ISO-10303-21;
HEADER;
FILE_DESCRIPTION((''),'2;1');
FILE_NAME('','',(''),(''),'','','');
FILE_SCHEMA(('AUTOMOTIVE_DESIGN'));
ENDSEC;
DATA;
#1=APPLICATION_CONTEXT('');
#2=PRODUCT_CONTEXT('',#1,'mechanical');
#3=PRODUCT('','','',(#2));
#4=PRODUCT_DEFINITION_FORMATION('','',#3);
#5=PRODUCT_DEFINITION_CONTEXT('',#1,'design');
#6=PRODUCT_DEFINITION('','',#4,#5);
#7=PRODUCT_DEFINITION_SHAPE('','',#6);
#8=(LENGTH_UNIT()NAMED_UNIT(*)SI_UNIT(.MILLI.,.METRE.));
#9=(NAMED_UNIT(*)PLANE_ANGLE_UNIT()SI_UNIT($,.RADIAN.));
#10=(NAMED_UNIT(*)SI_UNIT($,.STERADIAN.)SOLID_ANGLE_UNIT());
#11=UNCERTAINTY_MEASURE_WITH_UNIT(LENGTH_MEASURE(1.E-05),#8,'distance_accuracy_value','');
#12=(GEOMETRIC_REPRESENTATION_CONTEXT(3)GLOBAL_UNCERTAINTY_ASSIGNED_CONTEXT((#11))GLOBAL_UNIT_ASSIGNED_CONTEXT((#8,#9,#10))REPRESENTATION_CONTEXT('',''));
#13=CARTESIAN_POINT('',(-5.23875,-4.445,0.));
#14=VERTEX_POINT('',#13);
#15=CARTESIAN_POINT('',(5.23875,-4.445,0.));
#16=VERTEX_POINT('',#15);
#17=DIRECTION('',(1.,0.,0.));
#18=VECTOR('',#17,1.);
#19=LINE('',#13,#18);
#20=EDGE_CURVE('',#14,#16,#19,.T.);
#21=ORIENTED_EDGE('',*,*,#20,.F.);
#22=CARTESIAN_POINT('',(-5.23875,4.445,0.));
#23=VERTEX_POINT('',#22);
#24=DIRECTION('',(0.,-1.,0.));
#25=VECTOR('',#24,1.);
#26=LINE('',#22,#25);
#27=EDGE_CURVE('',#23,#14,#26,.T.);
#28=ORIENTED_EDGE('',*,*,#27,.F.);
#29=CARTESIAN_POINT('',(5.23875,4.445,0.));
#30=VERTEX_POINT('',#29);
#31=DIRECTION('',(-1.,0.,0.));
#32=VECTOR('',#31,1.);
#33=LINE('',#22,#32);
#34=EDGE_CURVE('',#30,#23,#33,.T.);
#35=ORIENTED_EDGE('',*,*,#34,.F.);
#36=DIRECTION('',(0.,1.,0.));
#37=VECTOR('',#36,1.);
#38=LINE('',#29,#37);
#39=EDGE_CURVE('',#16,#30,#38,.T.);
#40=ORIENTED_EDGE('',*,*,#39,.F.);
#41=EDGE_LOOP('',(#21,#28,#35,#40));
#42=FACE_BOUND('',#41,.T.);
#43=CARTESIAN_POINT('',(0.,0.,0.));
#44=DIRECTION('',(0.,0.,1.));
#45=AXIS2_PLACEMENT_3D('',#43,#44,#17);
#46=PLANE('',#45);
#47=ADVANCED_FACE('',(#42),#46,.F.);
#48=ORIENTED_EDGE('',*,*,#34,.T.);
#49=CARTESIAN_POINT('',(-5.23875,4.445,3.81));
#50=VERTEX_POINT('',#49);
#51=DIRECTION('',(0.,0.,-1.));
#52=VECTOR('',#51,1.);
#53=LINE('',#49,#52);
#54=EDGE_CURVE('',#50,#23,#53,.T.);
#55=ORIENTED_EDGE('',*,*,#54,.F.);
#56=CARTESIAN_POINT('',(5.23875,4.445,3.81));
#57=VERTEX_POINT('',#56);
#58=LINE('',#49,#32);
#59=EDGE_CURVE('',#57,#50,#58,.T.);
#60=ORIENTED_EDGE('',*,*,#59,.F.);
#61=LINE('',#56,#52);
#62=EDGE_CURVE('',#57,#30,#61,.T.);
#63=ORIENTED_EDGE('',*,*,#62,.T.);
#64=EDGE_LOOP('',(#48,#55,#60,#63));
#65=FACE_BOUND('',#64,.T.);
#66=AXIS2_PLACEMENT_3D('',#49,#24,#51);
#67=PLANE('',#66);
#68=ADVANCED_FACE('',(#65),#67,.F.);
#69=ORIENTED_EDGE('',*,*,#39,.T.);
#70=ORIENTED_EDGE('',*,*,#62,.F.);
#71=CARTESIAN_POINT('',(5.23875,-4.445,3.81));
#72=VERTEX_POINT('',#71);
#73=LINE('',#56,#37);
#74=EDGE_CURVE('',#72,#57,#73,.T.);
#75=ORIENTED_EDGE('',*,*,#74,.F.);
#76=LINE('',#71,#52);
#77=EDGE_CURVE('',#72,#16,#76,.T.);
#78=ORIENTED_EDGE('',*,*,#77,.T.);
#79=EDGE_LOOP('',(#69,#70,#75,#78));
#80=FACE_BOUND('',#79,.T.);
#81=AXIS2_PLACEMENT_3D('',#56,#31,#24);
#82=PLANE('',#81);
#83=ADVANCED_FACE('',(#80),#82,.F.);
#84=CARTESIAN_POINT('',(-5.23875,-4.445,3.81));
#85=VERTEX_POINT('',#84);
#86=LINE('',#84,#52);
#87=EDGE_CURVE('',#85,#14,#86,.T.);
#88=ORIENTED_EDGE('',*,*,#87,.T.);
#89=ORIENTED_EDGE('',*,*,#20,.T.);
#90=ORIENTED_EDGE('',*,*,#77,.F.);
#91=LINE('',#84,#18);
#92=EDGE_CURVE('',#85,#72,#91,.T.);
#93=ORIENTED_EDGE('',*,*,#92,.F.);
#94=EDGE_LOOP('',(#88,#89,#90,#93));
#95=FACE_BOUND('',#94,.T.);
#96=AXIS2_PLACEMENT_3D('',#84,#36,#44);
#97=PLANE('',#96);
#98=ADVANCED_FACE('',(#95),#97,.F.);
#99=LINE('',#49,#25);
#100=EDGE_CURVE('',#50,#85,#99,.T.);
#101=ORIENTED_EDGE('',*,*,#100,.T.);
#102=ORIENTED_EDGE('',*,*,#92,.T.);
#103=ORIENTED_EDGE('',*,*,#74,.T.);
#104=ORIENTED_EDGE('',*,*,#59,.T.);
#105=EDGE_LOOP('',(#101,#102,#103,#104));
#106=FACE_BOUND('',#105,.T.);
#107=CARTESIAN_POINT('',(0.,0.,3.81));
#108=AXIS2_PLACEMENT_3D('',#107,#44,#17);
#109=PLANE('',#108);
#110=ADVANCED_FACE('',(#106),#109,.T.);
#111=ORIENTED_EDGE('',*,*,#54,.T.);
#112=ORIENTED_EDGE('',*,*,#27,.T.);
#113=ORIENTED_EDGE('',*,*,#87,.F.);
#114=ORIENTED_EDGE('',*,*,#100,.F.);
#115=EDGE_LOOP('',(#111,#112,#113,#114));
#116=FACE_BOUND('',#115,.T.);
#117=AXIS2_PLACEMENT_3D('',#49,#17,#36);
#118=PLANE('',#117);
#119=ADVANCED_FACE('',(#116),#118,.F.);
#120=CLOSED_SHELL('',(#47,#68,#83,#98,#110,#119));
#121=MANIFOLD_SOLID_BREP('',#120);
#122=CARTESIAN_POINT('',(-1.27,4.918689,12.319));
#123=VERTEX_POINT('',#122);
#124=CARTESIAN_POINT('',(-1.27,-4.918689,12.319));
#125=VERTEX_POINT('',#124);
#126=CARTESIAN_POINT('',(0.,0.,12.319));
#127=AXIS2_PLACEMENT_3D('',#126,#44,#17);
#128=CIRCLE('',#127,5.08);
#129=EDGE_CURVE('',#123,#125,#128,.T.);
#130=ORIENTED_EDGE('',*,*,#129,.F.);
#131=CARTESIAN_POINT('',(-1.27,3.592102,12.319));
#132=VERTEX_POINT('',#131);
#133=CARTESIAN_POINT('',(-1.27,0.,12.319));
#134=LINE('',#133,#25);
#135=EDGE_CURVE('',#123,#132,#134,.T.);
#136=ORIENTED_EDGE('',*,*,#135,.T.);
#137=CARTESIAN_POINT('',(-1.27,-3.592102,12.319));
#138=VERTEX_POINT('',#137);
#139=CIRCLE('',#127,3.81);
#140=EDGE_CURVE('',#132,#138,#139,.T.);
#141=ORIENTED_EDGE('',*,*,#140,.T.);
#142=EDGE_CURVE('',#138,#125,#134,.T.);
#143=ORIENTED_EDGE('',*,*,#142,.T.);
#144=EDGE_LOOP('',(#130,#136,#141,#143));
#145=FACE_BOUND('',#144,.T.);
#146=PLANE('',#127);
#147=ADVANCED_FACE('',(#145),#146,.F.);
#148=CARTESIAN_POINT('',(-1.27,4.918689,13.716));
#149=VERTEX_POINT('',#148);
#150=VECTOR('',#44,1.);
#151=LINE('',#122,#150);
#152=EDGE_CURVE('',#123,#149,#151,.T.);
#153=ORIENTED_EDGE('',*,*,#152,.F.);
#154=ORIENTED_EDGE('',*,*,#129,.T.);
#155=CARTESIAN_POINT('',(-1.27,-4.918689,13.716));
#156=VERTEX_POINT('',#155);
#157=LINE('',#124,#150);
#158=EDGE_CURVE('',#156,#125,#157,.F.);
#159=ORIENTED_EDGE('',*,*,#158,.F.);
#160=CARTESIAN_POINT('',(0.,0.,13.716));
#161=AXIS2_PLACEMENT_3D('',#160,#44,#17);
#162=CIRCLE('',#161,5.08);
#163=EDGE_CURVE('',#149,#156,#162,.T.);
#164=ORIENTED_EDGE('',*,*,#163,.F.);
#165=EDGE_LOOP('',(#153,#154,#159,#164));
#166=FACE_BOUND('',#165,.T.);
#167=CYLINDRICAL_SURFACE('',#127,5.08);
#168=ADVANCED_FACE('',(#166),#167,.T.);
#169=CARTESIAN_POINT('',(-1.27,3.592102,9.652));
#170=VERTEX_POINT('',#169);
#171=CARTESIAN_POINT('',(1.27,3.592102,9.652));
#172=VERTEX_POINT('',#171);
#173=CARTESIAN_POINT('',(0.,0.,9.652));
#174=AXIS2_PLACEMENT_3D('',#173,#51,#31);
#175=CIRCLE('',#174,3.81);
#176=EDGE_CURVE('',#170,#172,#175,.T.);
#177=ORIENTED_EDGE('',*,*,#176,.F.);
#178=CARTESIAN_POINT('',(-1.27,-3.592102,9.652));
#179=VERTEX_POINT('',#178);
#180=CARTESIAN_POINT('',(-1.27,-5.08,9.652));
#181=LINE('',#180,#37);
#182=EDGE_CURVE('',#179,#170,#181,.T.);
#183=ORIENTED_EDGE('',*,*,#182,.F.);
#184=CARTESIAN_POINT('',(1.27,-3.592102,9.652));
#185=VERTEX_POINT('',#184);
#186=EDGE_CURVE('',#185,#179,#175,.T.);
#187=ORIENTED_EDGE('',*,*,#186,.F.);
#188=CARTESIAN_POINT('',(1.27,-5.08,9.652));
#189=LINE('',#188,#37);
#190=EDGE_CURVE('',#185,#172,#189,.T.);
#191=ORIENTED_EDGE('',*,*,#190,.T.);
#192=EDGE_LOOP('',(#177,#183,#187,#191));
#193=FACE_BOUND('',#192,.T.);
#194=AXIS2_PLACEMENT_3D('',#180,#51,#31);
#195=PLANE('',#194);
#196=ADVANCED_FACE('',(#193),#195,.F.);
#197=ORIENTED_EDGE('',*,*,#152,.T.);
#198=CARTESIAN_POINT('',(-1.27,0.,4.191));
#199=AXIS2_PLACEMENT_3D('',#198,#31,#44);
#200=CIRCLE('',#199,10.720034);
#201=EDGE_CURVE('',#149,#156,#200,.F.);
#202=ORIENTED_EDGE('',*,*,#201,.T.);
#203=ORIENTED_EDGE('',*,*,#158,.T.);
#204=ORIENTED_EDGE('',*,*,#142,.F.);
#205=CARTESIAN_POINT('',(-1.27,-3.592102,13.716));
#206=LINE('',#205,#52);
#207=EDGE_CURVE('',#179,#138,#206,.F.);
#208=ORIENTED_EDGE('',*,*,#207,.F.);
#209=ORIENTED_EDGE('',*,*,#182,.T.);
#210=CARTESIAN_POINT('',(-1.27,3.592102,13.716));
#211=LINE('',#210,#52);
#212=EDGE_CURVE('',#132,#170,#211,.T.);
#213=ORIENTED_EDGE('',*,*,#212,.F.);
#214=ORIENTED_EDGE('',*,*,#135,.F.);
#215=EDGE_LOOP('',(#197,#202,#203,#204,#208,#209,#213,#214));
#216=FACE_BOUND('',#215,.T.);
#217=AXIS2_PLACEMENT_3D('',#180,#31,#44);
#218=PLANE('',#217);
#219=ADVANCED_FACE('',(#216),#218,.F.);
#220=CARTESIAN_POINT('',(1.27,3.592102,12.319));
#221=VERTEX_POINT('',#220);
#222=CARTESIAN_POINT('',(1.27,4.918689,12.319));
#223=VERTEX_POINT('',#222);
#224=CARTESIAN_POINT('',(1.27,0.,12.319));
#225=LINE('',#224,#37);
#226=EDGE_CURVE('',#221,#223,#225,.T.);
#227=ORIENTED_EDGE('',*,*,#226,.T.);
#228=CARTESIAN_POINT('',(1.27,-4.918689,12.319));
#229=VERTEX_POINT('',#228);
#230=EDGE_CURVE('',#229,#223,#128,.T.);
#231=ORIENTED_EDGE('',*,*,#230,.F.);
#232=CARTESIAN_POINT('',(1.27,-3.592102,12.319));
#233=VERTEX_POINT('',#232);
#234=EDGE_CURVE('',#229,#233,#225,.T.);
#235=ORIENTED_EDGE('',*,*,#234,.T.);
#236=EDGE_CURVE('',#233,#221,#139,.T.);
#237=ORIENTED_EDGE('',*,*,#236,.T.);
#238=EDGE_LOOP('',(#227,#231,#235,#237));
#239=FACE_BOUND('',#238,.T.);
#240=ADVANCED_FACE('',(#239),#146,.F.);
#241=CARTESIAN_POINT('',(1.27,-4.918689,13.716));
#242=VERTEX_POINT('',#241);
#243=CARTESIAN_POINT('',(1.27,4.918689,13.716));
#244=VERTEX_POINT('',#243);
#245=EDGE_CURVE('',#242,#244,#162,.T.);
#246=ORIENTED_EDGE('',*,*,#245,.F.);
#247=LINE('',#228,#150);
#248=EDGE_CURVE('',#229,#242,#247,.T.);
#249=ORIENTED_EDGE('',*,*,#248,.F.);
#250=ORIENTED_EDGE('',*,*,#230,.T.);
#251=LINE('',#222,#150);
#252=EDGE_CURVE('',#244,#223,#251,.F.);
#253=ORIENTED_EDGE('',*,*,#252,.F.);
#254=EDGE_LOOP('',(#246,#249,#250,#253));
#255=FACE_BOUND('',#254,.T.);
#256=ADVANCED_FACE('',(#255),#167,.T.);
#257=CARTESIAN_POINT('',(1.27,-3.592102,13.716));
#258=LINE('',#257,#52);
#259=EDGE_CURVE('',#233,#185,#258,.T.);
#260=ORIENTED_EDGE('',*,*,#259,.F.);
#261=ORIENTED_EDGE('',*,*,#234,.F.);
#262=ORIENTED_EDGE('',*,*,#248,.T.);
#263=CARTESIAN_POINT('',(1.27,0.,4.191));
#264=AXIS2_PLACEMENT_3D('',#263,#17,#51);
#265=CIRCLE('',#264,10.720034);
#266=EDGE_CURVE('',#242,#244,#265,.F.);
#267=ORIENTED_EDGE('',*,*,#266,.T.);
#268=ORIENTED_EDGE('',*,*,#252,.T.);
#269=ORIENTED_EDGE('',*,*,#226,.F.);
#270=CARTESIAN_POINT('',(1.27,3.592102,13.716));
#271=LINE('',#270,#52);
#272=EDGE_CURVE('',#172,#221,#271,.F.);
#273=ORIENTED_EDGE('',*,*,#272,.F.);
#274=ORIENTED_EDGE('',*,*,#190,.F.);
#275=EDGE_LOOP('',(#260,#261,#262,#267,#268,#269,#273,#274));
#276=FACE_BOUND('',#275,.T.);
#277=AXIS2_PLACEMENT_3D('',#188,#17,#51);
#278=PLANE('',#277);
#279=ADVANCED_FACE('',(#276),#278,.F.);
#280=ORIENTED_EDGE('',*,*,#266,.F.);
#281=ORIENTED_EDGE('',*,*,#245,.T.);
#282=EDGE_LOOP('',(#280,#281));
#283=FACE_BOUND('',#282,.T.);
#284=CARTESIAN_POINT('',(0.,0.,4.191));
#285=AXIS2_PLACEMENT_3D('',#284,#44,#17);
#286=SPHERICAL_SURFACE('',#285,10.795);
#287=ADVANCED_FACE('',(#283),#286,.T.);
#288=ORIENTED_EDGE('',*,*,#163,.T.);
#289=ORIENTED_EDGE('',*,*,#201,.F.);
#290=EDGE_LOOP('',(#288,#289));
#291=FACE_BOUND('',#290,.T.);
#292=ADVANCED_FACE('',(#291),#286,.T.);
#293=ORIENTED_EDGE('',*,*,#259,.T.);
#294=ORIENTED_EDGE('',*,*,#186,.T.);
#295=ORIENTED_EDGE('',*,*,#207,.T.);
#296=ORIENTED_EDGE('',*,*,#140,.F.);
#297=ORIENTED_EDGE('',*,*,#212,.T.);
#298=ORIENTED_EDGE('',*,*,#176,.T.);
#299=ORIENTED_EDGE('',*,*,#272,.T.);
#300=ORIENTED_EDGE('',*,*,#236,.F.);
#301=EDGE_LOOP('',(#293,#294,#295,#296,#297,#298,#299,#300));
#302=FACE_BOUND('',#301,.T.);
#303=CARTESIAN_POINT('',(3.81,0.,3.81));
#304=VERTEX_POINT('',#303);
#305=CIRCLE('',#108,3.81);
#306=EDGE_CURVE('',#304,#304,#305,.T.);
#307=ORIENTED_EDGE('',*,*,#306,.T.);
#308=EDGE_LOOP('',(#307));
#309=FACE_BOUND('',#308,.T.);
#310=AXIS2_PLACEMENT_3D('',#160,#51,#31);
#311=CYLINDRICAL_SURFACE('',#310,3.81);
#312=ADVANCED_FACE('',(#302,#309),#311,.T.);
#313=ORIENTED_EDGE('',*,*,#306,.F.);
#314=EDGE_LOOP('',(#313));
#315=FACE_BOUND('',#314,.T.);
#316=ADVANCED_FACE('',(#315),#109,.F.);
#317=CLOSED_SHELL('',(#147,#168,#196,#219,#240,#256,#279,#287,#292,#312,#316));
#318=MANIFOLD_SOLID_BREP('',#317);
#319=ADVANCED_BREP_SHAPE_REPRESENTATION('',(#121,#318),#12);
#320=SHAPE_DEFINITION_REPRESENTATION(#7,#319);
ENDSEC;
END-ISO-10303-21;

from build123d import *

# Parameters (mm, degrees)
SKETCH1_W               = 10.4775
SKETCH1_H               = 8.89
BOSS_EXTRUDE1_DEPTH     = 3.81
SKETCH2_R               = 3.81
BOSS_EXTRUDE2_DEPTH     = 9.906
SKETCH3_R               = 5.08
BOSS_EXTRUDE3_DEPTH     = 1.397
CUT_EXTRUDE1_DEPTH      = 17.668266183
CUT_EXTRUDE1_DEPTH_BACK = 17.668266183
SKETCH4_W               = 2.54
SKETCH4_H               = 5.334


# Read off the part's stored shape, not the designer's step: Dome1
with BuildPart() as part:
    # Sketch1 → Boss-Extrude1 (new body)
    with BuildSketch(Plane.XY):
        Rectangle(SKETCH1_W, SKETCH1_H)
    extrude(amount=BOSS_EXTRUDE1_DEPTH)


with BuildPart() as body_2:
    # Sketch2 → Boss-Extrude2 (new body)
    with BuildSketch(Plane.XY.offset(3.81)):
        Circle(SKETCH2_R)
    extrude(amount=BOSS_EXTRUDE2_DEPTH)

    # Sketch3 → Boss-Extrude3 (add)
    with BuildSketch(Plane.XY.offset(13.716)):
        Circle(SKETCH3_R)
    extrude(amount=-BOSS_EXTRUDE3_DEPTH)

    # Dome1 outline → Dome1 (revolve)
    with BuildSketch(Plane.XZ):
        with BuildLine():
            Line((0, 13.716), (5.08000001, 13.715999995))
            ThreePointArc((5.08000001, 13.715999995), (2.618172078, 14.663688288), (0, 14.986))
            Line((0, 14.986), (0, 13.716))
        make_face()
    revolve(axis=Axis((0, 0, 0), (0, 0, 1)))

    # Sketch4 → Cut-Extrude1 (cut, two sides: drawn at the far end of the back side and taken through both)
    with BuildSketch(Plane(origin=(0, 0, 0), x_dir=(1, 0, 0), z_dir=(0, 1, 0)).offset(-CUT_EXTRUDE1_DEPTH_BACK)):
        with Locations((0, -12.319)):
            Rectangle(SKETCH4_W, SKETCH4_H)
    extrude(amount=CUT_EXTRUDE1_DEPTH + CUT_EXTRUDE1_DEPTH_BACK, mode=Mode.SUBTRACT)


solid = Compound([part.part, body_2.part])
